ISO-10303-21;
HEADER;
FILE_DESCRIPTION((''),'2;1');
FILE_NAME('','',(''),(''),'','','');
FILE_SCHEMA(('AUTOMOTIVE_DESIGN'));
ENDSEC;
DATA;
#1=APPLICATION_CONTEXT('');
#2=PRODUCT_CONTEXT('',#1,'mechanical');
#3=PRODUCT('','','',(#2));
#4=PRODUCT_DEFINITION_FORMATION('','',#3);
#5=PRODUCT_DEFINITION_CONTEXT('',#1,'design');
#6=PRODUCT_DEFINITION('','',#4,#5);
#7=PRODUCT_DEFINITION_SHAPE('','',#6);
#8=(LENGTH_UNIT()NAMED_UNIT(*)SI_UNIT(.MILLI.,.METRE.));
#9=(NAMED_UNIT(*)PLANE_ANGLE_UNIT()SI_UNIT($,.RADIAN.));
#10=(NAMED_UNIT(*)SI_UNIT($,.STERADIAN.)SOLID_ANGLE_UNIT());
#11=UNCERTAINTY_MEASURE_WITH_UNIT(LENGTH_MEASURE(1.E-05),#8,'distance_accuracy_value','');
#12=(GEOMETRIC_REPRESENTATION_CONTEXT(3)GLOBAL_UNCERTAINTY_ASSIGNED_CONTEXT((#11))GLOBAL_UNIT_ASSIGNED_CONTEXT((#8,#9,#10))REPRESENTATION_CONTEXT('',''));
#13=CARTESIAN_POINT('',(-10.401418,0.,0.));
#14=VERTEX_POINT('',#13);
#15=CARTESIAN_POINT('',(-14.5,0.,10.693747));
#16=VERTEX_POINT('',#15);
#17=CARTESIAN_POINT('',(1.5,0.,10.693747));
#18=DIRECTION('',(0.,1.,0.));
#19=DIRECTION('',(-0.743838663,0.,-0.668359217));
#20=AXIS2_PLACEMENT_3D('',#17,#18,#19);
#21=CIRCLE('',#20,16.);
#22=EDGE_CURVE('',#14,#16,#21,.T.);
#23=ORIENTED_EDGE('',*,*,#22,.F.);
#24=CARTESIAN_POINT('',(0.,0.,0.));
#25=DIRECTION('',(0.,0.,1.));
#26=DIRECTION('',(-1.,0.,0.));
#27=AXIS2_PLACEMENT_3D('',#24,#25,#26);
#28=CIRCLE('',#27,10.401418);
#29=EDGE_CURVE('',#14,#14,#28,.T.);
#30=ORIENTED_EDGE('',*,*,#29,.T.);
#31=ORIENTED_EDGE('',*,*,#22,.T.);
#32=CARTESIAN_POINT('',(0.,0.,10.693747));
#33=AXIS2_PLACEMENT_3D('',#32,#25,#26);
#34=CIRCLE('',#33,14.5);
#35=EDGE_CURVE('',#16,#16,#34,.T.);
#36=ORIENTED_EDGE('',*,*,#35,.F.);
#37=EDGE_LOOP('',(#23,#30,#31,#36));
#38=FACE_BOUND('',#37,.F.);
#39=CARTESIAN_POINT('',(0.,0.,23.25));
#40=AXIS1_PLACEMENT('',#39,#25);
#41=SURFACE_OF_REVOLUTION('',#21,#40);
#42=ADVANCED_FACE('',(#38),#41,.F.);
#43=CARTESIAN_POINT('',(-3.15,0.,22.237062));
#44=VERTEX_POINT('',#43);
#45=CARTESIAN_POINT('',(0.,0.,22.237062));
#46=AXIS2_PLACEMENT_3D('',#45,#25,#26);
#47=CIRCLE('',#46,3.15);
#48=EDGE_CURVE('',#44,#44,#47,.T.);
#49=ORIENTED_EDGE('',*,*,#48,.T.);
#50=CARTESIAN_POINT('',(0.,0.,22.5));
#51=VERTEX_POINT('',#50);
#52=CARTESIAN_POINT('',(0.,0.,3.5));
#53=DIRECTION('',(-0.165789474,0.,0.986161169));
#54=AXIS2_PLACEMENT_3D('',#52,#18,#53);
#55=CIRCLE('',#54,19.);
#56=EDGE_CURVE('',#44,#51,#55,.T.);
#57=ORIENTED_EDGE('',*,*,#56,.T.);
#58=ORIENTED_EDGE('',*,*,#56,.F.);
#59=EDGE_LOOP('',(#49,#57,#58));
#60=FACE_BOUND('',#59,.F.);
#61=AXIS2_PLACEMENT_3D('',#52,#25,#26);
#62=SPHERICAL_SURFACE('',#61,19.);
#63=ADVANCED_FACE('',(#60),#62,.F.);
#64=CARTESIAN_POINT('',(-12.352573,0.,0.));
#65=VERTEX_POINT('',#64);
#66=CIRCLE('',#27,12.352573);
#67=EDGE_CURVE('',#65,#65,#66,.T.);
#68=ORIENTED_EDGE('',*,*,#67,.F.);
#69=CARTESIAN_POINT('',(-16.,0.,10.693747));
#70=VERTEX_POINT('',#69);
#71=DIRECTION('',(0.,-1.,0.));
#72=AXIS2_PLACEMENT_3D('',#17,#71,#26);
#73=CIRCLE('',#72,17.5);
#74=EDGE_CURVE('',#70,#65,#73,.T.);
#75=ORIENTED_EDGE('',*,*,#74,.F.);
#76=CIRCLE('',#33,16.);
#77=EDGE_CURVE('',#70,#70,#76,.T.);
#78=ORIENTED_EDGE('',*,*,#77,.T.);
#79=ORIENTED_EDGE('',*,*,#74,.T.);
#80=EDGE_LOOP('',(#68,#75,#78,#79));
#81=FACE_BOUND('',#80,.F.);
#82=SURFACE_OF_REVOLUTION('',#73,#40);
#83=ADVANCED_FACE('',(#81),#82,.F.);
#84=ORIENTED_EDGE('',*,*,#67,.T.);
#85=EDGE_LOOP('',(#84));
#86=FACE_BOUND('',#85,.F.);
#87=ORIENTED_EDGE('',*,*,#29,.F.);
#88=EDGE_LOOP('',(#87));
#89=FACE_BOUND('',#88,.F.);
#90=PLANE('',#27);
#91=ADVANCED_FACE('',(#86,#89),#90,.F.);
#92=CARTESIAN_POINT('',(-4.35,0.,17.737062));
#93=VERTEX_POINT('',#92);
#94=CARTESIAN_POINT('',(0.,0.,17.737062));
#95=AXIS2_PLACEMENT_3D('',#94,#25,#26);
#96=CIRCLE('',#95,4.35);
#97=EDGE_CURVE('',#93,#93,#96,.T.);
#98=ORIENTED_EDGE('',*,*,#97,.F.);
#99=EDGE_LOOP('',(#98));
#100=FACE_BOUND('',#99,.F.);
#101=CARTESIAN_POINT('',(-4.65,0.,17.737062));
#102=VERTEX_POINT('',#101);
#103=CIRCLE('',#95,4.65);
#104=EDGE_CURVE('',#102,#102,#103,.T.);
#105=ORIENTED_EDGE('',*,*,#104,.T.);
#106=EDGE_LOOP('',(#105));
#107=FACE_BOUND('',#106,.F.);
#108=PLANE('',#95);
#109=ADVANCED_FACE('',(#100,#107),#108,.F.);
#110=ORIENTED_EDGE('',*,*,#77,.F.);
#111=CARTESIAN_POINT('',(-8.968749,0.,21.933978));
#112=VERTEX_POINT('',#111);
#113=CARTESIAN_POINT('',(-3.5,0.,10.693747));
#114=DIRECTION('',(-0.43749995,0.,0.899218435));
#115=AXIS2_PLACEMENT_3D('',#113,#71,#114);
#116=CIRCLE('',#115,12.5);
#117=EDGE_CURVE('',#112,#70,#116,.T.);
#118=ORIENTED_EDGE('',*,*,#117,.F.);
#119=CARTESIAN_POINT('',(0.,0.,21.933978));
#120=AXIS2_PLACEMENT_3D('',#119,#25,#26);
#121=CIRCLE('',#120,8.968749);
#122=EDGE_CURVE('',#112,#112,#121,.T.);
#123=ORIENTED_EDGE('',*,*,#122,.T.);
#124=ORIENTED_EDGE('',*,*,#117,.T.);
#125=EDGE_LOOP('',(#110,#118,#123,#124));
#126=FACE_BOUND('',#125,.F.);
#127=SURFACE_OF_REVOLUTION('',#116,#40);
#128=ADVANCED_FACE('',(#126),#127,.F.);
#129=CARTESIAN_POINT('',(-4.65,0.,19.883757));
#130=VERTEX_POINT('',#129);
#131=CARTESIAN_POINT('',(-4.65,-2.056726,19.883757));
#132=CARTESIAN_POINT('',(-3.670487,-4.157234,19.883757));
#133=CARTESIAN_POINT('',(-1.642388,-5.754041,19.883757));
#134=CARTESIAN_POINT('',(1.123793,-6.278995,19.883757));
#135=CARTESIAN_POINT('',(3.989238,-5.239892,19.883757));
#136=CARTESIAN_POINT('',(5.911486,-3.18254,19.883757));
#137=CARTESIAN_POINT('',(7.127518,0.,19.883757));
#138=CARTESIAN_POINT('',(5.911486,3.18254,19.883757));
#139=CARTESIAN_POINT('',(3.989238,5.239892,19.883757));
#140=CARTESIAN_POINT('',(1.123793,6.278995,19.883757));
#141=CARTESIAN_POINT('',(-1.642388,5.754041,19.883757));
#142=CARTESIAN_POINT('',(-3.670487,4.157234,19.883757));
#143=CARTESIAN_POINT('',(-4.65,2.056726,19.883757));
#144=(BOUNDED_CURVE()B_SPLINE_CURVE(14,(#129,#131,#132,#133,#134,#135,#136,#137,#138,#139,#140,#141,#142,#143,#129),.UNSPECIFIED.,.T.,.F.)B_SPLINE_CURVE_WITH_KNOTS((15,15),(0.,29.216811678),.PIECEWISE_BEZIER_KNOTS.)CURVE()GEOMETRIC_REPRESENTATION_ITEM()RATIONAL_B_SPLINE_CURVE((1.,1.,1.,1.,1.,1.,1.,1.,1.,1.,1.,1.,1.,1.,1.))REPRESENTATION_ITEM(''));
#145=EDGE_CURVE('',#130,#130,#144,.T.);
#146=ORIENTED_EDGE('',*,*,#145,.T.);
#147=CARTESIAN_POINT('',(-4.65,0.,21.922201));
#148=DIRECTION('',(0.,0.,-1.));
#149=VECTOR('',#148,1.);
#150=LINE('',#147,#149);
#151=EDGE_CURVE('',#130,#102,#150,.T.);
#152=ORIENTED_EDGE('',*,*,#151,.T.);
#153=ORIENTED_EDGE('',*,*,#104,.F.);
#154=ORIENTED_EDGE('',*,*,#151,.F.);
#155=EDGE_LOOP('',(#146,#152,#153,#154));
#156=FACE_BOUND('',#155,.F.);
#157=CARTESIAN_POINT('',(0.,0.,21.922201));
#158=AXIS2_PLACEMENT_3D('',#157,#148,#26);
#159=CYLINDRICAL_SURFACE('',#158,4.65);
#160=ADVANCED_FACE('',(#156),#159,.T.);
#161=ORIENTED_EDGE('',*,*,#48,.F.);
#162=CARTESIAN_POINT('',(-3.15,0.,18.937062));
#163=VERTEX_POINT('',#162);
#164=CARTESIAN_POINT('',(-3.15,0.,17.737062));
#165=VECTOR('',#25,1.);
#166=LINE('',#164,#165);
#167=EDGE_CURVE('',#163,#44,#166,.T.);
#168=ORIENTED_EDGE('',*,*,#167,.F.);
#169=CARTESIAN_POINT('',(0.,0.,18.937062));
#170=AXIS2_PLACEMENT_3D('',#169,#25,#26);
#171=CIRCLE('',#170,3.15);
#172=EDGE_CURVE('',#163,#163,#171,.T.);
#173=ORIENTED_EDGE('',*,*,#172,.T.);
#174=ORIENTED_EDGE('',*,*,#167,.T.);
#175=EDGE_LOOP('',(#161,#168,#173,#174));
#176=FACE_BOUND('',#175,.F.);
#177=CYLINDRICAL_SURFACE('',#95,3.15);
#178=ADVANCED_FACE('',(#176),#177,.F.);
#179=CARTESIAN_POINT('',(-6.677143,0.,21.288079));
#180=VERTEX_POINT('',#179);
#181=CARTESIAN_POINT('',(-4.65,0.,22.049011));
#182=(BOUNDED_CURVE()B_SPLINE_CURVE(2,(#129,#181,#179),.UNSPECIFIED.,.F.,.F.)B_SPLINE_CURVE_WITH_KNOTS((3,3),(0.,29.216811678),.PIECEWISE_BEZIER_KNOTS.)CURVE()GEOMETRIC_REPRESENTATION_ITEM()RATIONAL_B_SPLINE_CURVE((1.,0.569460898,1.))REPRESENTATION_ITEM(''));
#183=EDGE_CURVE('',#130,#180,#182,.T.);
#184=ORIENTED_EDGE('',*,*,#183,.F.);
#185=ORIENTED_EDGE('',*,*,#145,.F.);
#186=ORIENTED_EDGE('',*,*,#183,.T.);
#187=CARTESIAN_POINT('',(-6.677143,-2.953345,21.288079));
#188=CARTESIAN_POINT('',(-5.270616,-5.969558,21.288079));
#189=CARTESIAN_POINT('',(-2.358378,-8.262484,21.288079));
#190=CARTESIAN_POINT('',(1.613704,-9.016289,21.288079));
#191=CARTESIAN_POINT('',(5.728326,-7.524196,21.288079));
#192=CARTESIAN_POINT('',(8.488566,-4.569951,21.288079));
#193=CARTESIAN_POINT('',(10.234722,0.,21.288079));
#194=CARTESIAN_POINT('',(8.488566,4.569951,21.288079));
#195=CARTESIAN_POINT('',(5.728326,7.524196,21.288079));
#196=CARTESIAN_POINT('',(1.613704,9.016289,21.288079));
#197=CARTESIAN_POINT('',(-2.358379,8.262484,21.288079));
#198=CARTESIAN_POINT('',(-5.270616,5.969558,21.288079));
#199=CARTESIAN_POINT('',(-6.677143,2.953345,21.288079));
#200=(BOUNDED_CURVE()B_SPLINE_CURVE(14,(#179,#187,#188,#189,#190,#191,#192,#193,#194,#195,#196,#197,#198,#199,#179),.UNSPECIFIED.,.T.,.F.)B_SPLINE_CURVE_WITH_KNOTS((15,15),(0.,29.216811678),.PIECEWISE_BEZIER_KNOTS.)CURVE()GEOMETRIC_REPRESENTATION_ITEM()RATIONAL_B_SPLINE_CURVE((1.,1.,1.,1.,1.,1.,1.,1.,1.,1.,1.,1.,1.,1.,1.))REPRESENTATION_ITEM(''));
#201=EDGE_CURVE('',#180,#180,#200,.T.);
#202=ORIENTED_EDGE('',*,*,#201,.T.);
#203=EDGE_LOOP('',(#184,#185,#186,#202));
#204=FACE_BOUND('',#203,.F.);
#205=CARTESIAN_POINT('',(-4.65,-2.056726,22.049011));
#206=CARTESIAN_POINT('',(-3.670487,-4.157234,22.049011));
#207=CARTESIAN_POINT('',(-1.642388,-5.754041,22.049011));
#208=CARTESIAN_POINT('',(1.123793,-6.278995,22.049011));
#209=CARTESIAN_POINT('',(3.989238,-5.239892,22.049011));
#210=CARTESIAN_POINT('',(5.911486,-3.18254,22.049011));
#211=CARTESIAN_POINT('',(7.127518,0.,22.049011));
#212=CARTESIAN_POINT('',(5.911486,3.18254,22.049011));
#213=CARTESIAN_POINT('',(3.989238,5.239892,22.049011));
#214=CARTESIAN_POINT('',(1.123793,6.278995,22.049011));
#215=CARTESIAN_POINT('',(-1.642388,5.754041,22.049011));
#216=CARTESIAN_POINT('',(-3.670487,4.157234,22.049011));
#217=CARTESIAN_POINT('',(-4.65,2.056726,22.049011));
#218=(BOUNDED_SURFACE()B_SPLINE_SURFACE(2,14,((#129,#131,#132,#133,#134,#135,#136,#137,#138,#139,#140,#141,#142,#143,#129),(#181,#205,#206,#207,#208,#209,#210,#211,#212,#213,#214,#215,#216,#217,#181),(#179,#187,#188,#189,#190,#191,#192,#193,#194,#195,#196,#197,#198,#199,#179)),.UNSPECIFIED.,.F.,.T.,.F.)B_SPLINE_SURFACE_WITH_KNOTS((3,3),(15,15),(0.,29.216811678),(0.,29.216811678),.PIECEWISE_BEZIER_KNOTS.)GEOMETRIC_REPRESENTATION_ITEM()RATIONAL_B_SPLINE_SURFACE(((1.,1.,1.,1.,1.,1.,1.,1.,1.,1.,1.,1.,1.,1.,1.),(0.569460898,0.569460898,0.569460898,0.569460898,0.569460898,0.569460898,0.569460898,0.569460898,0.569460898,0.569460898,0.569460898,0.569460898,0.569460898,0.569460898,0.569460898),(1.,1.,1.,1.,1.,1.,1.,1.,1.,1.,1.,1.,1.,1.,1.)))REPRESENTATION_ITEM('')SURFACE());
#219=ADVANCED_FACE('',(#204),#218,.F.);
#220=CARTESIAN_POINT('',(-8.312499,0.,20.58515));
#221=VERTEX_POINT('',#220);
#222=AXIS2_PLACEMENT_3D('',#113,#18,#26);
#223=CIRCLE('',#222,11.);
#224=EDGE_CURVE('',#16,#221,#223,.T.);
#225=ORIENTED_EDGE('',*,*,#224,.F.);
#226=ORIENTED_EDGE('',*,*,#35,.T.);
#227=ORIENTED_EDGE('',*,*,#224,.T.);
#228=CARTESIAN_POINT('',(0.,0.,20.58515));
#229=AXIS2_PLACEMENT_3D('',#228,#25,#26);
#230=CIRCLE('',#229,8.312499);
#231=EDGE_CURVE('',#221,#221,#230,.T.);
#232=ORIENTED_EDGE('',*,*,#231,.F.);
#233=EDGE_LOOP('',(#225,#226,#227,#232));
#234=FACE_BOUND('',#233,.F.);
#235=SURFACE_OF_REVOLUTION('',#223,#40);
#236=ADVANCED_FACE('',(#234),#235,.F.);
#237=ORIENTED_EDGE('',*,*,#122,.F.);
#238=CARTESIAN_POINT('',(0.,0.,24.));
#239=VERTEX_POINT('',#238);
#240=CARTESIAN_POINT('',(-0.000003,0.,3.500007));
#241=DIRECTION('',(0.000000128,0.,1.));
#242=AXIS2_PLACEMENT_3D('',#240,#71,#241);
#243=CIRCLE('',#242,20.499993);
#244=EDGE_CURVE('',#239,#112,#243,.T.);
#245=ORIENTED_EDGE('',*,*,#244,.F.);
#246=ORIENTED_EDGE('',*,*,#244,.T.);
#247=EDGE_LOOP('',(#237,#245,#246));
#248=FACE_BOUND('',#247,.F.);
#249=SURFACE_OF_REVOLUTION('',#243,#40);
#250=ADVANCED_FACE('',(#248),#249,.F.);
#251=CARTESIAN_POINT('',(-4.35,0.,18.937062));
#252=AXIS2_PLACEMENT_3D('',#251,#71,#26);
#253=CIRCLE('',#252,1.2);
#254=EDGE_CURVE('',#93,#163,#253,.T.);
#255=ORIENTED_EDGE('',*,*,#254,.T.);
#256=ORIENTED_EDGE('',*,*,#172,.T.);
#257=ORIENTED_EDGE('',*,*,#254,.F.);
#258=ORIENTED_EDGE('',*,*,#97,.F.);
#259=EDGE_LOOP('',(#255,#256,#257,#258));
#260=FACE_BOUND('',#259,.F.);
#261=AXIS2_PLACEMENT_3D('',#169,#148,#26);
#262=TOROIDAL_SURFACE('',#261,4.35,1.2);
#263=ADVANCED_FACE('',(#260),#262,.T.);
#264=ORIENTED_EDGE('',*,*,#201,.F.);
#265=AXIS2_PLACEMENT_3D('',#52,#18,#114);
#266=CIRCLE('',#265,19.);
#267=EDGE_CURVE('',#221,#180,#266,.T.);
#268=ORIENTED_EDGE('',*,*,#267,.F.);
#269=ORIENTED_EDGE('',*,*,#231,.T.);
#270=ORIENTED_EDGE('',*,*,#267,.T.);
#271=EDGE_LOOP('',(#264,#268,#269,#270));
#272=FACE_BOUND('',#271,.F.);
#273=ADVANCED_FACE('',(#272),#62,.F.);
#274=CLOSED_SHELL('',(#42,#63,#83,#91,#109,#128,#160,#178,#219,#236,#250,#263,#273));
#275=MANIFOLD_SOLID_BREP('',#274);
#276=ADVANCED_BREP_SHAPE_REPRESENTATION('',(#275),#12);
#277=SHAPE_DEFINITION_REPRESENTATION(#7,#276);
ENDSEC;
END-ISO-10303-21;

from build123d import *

# Parameters (mm, degrees)
F2_R = 1.2
F3_R = 1.5


# Not quite as in the source:
# - ends of sketch curves that miss each other by under 0.0002 mm in the source are joined


with BuildPart() as f1:
    # F0 (on Front) → F1 (revolve)
    with BuildSketch(Plane.XZ):
        with BuildLine():
            ThreePointArc((-3.15, 22.237062203), (-3.9031761874, 22.0947631243), (-4.65, 21.92220128))
            Line((-4.65, 21.92220128), (-4.65, 17.737062203))
            Line((-4.65, 17.737062203), (-3.15, 17.737062203))
            Line((-3.15, 17.737062203), (-3.15, 22.237062203))
        make_face()
        with BuildLine():
            ThreePointArc((-8.3124990512, 20.5851502634), (-6.5156367124, 21.3478704117), (-4.65, 21.92220128))
            ThreePointArc((-4.65, 21.92220128), (-3.9031761874, 22.0947631243), (-3.15, 22.237062203))
            ThreePointArc((-3.15, 22.237062203), (-1.5804774821, 22.4341514446), (0, 22.5))
            Line((0, 22.5), (0, 24))
            ThreePointArc((0, 24), (-4.6018178135, 23.4768187956), (-8.9687491511, 21.933978275))
            ThreePointArc((-8.9687491511, 21.933978275), (-14.0973903538, 17.3228740591), (-16, 10.6937474793))
            ThreePointArc((-16, 10.6937474793), (-15.0630616225, 5.0444120813), (-12.3525726045, 0))
            Line((-12.3525726045, 0), (-10.4014182071, 0))
            ThreePointArc((-10.4014182071, 0), (-13.4402589307, 4.9676099375), (-14.4999996005, 10.6937474793))
            ThreePointArc((-14.4999996005, 10.6937474793), (-12.8257031653, 16.5273786831), (-8.3124990512, 20.5851502634))
        make_face()
    revolve(axis=Axis((0, 0, 23.25), (0, 0, 1)))

    # F2
    f2_edges = [f1.edges().sort_by_distance(p)[0] for p in [
        (3.15, 0, 17.737062),
    ]]
    fillet(f2_edges, radius=F2_R)

    # F3
    f3_edges = [f1.edges().sort_by_distance(p)[0] for p in [
        (4.65, 0, 21.922201),
    ]]
    fillet(f3_edges, radius=F3_R)


solid = f1.part
